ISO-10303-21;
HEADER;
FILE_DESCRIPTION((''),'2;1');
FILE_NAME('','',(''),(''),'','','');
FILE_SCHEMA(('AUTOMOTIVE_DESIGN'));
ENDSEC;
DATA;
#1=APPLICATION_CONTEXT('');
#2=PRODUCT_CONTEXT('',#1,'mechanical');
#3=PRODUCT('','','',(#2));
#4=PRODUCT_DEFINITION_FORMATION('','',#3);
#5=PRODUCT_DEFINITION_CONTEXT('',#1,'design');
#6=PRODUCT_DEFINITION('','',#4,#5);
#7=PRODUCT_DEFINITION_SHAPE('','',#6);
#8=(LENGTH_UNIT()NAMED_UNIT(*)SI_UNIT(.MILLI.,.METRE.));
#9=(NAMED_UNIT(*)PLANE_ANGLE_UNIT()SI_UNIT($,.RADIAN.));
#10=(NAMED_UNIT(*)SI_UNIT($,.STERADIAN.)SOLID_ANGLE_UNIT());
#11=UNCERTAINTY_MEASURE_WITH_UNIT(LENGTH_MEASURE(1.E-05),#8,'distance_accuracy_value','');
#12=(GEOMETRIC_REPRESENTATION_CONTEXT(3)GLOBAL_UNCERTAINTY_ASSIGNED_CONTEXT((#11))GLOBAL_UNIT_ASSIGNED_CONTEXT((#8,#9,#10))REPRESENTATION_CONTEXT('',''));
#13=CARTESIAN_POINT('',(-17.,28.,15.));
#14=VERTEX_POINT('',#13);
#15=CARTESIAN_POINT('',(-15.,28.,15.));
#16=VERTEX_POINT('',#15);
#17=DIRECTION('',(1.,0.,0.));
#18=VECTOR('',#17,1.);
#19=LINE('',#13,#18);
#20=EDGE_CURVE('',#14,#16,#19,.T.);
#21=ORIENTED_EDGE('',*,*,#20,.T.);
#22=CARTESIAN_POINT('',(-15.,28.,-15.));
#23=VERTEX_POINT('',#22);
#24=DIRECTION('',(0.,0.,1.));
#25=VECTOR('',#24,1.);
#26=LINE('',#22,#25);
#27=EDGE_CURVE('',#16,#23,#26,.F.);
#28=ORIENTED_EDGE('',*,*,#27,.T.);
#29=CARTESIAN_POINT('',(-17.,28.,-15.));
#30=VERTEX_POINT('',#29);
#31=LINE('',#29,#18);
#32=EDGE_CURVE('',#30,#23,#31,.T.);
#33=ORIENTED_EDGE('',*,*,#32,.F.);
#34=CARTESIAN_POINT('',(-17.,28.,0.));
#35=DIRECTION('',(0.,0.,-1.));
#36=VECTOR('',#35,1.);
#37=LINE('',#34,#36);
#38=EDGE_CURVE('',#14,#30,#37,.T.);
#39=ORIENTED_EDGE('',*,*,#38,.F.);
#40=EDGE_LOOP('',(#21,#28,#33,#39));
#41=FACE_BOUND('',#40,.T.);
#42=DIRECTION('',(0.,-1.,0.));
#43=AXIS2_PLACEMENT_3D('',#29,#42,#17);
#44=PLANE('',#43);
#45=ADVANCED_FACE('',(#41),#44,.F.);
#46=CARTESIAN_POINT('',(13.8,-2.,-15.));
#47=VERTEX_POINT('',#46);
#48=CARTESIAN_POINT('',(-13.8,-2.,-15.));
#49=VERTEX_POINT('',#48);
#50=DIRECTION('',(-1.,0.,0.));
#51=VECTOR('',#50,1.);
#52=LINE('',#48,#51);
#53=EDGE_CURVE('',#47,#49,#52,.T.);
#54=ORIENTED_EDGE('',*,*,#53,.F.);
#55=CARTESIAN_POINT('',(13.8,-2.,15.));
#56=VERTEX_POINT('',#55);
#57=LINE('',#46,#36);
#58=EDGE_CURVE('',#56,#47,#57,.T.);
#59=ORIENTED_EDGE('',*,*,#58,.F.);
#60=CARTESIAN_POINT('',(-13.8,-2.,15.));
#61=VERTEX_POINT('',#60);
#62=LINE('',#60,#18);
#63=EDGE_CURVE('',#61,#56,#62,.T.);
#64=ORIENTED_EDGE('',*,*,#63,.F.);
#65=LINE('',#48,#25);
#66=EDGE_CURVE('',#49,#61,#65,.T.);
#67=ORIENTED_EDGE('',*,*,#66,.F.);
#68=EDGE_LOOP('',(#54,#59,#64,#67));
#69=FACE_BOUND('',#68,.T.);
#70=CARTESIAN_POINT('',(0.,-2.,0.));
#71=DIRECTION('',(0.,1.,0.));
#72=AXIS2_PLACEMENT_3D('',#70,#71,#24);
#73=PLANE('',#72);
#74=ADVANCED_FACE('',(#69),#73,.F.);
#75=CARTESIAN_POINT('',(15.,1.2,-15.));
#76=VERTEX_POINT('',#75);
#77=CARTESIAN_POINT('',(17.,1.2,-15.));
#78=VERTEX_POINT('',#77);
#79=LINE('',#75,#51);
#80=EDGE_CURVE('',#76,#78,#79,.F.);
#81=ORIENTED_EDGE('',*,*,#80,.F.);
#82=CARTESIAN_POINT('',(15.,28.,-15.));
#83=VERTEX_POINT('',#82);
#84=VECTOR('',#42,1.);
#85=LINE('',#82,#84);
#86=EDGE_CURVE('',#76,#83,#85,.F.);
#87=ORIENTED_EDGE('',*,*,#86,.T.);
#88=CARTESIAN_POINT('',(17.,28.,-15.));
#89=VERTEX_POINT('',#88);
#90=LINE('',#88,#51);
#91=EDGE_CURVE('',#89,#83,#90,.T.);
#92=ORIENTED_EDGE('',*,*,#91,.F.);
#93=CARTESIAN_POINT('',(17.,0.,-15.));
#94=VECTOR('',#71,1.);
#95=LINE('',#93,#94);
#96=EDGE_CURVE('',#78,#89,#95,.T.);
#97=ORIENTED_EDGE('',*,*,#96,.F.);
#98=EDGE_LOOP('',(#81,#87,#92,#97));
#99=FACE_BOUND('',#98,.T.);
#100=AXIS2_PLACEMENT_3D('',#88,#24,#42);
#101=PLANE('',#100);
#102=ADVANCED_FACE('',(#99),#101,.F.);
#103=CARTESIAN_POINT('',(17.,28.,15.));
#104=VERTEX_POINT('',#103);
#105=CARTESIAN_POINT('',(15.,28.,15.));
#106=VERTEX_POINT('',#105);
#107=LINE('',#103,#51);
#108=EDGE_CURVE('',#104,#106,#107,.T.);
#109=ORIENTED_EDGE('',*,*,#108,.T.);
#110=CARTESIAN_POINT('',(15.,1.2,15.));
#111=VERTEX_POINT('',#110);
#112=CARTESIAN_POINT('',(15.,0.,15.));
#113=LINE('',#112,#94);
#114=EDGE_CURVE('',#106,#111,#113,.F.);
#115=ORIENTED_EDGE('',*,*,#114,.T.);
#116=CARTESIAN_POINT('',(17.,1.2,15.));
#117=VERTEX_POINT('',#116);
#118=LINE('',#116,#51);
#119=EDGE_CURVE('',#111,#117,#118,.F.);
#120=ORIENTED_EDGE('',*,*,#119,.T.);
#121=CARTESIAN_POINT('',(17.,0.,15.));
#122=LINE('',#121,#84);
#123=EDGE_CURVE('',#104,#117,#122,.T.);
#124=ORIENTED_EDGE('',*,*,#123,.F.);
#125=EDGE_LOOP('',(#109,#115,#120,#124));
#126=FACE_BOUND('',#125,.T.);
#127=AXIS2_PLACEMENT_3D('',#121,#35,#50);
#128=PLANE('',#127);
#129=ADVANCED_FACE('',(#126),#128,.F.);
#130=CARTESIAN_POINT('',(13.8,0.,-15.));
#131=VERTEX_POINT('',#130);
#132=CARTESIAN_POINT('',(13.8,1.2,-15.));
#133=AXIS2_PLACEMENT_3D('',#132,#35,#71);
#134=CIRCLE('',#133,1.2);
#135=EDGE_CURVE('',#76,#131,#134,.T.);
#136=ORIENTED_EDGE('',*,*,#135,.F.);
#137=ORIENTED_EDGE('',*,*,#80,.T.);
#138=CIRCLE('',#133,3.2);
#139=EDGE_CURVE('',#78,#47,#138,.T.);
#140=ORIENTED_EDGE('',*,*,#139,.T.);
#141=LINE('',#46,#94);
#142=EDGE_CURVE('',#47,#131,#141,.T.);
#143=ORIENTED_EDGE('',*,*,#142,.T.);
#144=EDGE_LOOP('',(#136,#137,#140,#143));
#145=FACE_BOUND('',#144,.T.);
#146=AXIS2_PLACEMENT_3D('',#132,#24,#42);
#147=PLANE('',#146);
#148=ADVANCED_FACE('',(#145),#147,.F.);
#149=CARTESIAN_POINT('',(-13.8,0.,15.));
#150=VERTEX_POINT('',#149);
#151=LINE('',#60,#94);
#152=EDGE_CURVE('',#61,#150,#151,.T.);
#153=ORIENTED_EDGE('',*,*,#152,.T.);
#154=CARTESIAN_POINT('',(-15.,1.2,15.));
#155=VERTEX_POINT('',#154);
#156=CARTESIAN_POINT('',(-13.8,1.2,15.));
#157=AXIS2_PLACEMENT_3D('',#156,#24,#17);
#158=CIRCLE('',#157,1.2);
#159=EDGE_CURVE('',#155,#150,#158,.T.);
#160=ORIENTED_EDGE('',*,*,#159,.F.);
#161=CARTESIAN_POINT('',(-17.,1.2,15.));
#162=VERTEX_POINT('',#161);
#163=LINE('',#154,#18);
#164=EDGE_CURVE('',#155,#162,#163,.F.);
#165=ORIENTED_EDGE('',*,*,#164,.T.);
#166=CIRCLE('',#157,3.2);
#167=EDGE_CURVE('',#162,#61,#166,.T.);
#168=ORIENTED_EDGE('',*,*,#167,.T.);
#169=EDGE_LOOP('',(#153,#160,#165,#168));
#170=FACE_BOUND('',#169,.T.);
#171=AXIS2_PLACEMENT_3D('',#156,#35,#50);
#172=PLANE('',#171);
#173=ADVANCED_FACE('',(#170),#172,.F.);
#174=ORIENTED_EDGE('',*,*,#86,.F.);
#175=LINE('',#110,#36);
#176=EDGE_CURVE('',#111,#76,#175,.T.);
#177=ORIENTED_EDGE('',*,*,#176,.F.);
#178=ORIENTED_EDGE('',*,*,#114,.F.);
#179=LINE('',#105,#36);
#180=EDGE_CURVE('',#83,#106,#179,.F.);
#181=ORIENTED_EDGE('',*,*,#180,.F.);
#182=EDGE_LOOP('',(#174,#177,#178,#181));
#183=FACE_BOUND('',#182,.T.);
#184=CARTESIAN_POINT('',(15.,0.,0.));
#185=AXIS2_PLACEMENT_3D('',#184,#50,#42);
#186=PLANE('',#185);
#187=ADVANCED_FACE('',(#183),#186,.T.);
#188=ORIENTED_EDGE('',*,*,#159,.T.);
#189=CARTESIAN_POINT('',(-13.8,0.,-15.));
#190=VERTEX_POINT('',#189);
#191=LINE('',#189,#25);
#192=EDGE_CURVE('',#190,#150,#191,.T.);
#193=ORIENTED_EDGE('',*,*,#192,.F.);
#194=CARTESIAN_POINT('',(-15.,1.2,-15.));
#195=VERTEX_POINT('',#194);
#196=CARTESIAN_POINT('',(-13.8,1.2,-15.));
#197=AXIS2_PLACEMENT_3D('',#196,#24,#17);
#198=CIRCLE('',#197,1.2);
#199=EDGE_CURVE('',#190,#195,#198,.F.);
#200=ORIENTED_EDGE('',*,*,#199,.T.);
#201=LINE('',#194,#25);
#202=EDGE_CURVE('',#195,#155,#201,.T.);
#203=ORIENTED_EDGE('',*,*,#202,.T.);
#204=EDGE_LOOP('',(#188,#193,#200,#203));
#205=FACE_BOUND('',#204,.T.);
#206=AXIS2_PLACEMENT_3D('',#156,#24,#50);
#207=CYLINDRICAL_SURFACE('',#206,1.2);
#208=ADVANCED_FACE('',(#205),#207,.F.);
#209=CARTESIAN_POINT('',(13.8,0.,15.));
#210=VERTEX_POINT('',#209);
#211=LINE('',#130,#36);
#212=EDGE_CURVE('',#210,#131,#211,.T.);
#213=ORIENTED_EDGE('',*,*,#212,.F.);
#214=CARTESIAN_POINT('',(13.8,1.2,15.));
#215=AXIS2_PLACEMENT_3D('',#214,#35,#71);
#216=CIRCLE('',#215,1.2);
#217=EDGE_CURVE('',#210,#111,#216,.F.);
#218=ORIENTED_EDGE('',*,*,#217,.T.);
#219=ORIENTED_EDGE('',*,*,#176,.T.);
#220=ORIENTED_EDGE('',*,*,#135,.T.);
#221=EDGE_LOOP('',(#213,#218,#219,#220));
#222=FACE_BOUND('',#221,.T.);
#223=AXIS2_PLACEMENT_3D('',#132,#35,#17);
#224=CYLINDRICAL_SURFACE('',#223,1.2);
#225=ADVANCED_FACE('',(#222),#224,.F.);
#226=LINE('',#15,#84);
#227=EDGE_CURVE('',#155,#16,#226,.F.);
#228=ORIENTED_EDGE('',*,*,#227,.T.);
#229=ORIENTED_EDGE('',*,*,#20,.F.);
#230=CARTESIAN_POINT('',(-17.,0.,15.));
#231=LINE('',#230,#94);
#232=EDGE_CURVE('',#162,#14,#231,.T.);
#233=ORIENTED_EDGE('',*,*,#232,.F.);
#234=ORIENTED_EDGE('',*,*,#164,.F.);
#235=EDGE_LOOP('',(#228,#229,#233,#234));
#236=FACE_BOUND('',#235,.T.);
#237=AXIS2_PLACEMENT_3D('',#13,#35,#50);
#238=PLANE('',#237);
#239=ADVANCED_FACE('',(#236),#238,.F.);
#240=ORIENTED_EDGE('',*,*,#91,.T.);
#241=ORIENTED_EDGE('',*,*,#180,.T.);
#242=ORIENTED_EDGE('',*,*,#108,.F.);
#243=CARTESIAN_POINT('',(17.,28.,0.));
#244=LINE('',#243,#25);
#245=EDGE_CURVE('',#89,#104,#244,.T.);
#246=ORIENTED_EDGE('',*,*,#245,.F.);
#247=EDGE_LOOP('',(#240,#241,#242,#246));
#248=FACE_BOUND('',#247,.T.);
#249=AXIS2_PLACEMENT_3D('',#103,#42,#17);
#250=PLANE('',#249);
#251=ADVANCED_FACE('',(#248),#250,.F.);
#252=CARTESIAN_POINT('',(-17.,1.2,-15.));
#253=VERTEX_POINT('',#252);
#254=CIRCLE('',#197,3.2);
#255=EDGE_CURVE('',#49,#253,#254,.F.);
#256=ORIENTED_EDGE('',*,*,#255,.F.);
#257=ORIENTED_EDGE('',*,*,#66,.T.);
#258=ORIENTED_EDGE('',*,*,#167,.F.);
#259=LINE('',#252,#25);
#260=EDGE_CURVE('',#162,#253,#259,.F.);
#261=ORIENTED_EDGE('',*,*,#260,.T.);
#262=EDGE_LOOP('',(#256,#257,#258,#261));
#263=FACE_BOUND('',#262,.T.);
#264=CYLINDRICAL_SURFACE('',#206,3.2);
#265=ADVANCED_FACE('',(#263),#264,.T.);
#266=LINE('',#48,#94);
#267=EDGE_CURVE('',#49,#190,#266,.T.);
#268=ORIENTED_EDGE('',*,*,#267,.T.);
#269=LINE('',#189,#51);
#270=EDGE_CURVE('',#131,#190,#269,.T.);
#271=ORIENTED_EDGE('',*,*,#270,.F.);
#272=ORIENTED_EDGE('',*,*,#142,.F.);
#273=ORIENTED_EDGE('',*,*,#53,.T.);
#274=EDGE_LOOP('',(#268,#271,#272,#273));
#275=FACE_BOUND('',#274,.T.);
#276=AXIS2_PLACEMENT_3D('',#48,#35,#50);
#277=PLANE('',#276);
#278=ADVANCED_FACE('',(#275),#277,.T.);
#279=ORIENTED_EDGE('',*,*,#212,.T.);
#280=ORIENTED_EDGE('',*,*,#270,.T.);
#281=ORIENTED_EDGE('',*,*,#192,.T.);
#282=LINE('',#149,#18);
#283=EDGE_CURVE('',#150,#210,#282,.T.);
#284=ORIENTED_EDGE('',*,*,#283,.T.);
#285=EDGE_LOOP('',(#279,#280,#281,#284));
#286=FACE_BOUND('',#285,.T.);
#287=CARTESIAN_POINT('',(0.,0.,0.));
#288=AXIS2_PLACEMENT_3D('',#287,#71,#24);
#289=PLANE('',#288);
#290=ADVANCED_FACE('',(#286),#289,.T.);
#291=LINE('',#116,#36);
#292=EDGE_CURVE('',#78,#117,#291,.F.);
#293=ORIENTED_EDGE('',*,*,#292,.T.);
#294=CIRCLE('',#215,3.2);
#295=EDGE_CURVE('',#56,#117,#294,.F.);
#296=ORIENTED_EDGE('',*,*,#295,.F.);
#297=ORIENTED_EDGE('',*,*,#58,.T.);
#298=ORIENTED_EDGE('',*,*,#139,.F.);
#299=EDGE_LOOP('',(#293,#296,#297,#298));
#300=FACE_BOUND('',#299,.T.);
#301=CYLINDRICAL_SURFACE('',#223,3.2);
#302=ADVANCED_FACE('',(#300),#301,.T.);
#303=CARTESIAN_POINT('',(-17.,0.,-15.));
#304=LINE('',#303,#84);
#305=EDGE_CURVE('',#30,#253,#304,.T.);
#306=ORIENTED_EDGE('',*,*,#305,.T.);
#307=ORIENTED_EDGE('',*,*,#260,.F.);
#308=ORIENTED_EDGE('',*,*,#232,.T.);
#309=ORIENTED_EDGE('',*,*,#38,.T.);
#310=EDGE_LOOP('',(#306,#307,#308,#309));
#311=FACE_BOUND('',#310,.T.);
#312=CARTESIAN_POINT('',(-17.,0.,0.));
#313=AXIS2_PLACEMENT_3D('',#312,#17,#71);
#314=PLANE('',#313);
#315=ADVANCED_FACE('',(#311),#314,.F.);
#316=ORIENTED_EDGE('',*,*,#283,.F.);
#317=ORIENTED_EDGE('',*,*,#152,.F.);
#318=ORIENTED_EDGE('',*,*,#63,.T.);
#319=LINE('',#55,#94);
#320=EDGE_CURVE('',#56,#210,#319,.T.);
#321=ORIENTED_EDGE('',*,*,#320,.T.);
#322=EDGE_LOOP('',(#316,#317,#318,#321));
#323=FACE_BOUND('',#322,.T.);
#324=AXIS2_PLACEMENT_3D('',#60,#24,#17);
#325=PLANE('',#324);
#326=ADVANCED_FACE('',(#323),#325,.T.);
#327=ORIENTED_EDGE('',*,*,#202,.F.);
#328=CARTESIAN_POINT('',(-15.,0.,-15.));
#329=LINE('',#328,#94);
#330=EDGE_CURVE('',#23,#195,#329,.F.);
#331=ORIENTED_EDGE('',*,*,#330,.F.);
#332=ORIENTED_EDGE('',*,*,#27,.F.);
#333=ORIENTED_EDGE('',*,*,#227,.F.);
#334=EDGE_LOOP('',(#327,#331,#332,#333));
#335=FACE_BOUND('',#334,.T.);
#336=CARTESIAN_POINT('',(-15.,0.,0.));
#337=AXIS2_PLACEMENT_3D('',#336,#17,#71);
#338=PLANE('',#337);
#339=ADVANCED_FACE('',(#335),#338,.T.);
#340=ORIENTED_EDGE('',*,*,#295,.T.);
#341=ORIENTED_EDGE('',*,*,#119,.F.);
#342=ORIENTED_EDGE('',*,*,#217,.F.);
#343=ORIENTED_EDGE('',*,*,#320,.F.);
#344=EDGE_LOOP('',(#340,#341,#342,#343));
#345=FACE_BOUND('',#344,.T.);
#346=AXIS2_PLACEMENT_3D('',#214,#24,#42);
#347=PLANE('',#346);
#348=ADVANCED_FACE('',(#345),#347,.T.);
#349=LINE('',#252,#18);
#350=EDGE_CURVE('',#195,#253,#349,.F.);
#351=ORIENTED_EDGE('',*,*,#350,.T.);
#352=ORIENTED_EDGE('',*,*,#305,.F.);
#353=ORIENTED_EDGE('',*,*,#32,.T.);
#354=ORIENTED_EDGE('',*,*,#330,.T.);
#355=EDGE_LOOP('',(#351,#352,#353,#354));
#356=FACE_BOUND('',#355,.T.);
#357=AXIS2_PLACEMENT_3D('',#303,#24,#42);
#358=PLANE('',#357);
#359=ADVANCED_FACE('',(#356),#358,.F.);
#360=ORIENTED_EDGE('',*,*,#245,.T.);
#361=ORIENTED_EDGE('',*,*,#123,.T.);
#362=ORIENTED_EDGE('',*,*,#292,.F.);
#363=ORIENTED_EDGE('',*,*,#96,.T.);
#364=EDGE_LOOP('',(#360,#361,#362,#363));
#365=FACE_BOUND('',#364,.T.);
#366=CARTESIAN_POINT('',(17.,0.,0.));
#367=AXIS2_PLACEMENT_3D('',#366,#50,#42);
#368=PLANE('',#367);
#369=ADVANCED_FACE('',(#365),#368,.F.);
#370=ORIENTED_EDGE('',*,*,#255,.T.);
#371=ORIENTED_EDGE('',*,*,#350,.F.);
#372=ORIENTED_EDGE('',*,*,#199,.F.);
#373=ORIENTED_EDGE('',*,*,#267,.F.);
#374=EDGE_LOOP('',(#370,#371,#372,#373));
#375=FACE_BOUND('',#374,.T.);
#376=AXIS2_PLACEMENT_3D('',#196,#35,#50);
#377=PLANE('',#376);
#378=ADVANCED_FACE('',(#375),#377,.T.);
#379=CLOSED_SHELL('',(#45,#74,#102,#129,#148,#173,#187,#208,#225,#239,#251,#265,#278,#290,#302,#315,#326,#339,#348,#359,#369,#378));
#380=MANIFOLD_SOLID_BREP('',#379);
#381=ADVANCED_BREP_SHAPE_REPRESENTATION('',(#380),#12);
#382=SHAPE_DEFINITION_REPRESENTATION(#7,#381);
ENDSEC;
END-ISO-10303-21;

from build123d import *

# Parameters (mm, degrees)
SKETCH1_W               = 27.6
SKETCH1_H               = 30
BASE_FLANGE1_DEPTH      = 2
EDGE_FLANGE1_DEPTH      = 30
EDGE_FLANGE1_BEND_DEPTH = 30


# Sheet-metal steps are written as plain solids
with BuildPart() as part:
    # Sketch1 → Base-Flange1 (new body)
    with BuildSketch(Plane(origin=(0, 0, 0), x_dir=(1, 0, 0), z_dir=(0, 1, 0))):
        Rectangle(SKETCH1_W, SKETCH1_H)
    extrude(amount=-BASE_FLANGE1_DEPTH)

    # Edge-Flange1 section (across the edge) → Edge-Flange1 (add)
    with BuildSketch(Plane(origin=(15, 0, 15), x_dir=(-1, 0, 0), z_dir=(0, 0, -1))):
        with BuildLine():
            Line((-2, 1.2), (-2, 28))
            Line((-2, 28), (0, 28))
            Line((0, 28), (0, 1.2))
            ThreePointArc((0, 1.2), (0.351471863, 0.351471863), (1.2, 0))
            Line((1.2, 0), (1.2, -2))
            ThreePointArc((1.2, -2), (-1.0627417, -1.0627417), (-2, 1.2))
        make_face()
    extrude(amount=EDGE_FLANGE1_DEPTH)

    # Edge-Flange1 section 2 (across the edge) → Edge-Flange1 bend (add)
    with BuildSketch(Plane(origin=(-15, 0, -15), x_dir=(1, 0, 0), z_dir=(0, 0, 1))):
        with BuildLine():
            Line((-2, 1.2), (-2, 28))
            Line((-2, 28), (0, 28))
            Line((0, 28), (0, 1.2))
            ThreePointArc((0, 1.2), (0.351471863, 0.351471863), (1.2, 0))
            Line((1.2, 0), (1.2, -2))
            ThreePointArc((1.2, -2), (-1.0627417, -1.0627417), (-2, 1.2))
        make_face()
    extrude(amount=EDGE_FLANGE1_BEND_DEPTH)


solid = part.part
